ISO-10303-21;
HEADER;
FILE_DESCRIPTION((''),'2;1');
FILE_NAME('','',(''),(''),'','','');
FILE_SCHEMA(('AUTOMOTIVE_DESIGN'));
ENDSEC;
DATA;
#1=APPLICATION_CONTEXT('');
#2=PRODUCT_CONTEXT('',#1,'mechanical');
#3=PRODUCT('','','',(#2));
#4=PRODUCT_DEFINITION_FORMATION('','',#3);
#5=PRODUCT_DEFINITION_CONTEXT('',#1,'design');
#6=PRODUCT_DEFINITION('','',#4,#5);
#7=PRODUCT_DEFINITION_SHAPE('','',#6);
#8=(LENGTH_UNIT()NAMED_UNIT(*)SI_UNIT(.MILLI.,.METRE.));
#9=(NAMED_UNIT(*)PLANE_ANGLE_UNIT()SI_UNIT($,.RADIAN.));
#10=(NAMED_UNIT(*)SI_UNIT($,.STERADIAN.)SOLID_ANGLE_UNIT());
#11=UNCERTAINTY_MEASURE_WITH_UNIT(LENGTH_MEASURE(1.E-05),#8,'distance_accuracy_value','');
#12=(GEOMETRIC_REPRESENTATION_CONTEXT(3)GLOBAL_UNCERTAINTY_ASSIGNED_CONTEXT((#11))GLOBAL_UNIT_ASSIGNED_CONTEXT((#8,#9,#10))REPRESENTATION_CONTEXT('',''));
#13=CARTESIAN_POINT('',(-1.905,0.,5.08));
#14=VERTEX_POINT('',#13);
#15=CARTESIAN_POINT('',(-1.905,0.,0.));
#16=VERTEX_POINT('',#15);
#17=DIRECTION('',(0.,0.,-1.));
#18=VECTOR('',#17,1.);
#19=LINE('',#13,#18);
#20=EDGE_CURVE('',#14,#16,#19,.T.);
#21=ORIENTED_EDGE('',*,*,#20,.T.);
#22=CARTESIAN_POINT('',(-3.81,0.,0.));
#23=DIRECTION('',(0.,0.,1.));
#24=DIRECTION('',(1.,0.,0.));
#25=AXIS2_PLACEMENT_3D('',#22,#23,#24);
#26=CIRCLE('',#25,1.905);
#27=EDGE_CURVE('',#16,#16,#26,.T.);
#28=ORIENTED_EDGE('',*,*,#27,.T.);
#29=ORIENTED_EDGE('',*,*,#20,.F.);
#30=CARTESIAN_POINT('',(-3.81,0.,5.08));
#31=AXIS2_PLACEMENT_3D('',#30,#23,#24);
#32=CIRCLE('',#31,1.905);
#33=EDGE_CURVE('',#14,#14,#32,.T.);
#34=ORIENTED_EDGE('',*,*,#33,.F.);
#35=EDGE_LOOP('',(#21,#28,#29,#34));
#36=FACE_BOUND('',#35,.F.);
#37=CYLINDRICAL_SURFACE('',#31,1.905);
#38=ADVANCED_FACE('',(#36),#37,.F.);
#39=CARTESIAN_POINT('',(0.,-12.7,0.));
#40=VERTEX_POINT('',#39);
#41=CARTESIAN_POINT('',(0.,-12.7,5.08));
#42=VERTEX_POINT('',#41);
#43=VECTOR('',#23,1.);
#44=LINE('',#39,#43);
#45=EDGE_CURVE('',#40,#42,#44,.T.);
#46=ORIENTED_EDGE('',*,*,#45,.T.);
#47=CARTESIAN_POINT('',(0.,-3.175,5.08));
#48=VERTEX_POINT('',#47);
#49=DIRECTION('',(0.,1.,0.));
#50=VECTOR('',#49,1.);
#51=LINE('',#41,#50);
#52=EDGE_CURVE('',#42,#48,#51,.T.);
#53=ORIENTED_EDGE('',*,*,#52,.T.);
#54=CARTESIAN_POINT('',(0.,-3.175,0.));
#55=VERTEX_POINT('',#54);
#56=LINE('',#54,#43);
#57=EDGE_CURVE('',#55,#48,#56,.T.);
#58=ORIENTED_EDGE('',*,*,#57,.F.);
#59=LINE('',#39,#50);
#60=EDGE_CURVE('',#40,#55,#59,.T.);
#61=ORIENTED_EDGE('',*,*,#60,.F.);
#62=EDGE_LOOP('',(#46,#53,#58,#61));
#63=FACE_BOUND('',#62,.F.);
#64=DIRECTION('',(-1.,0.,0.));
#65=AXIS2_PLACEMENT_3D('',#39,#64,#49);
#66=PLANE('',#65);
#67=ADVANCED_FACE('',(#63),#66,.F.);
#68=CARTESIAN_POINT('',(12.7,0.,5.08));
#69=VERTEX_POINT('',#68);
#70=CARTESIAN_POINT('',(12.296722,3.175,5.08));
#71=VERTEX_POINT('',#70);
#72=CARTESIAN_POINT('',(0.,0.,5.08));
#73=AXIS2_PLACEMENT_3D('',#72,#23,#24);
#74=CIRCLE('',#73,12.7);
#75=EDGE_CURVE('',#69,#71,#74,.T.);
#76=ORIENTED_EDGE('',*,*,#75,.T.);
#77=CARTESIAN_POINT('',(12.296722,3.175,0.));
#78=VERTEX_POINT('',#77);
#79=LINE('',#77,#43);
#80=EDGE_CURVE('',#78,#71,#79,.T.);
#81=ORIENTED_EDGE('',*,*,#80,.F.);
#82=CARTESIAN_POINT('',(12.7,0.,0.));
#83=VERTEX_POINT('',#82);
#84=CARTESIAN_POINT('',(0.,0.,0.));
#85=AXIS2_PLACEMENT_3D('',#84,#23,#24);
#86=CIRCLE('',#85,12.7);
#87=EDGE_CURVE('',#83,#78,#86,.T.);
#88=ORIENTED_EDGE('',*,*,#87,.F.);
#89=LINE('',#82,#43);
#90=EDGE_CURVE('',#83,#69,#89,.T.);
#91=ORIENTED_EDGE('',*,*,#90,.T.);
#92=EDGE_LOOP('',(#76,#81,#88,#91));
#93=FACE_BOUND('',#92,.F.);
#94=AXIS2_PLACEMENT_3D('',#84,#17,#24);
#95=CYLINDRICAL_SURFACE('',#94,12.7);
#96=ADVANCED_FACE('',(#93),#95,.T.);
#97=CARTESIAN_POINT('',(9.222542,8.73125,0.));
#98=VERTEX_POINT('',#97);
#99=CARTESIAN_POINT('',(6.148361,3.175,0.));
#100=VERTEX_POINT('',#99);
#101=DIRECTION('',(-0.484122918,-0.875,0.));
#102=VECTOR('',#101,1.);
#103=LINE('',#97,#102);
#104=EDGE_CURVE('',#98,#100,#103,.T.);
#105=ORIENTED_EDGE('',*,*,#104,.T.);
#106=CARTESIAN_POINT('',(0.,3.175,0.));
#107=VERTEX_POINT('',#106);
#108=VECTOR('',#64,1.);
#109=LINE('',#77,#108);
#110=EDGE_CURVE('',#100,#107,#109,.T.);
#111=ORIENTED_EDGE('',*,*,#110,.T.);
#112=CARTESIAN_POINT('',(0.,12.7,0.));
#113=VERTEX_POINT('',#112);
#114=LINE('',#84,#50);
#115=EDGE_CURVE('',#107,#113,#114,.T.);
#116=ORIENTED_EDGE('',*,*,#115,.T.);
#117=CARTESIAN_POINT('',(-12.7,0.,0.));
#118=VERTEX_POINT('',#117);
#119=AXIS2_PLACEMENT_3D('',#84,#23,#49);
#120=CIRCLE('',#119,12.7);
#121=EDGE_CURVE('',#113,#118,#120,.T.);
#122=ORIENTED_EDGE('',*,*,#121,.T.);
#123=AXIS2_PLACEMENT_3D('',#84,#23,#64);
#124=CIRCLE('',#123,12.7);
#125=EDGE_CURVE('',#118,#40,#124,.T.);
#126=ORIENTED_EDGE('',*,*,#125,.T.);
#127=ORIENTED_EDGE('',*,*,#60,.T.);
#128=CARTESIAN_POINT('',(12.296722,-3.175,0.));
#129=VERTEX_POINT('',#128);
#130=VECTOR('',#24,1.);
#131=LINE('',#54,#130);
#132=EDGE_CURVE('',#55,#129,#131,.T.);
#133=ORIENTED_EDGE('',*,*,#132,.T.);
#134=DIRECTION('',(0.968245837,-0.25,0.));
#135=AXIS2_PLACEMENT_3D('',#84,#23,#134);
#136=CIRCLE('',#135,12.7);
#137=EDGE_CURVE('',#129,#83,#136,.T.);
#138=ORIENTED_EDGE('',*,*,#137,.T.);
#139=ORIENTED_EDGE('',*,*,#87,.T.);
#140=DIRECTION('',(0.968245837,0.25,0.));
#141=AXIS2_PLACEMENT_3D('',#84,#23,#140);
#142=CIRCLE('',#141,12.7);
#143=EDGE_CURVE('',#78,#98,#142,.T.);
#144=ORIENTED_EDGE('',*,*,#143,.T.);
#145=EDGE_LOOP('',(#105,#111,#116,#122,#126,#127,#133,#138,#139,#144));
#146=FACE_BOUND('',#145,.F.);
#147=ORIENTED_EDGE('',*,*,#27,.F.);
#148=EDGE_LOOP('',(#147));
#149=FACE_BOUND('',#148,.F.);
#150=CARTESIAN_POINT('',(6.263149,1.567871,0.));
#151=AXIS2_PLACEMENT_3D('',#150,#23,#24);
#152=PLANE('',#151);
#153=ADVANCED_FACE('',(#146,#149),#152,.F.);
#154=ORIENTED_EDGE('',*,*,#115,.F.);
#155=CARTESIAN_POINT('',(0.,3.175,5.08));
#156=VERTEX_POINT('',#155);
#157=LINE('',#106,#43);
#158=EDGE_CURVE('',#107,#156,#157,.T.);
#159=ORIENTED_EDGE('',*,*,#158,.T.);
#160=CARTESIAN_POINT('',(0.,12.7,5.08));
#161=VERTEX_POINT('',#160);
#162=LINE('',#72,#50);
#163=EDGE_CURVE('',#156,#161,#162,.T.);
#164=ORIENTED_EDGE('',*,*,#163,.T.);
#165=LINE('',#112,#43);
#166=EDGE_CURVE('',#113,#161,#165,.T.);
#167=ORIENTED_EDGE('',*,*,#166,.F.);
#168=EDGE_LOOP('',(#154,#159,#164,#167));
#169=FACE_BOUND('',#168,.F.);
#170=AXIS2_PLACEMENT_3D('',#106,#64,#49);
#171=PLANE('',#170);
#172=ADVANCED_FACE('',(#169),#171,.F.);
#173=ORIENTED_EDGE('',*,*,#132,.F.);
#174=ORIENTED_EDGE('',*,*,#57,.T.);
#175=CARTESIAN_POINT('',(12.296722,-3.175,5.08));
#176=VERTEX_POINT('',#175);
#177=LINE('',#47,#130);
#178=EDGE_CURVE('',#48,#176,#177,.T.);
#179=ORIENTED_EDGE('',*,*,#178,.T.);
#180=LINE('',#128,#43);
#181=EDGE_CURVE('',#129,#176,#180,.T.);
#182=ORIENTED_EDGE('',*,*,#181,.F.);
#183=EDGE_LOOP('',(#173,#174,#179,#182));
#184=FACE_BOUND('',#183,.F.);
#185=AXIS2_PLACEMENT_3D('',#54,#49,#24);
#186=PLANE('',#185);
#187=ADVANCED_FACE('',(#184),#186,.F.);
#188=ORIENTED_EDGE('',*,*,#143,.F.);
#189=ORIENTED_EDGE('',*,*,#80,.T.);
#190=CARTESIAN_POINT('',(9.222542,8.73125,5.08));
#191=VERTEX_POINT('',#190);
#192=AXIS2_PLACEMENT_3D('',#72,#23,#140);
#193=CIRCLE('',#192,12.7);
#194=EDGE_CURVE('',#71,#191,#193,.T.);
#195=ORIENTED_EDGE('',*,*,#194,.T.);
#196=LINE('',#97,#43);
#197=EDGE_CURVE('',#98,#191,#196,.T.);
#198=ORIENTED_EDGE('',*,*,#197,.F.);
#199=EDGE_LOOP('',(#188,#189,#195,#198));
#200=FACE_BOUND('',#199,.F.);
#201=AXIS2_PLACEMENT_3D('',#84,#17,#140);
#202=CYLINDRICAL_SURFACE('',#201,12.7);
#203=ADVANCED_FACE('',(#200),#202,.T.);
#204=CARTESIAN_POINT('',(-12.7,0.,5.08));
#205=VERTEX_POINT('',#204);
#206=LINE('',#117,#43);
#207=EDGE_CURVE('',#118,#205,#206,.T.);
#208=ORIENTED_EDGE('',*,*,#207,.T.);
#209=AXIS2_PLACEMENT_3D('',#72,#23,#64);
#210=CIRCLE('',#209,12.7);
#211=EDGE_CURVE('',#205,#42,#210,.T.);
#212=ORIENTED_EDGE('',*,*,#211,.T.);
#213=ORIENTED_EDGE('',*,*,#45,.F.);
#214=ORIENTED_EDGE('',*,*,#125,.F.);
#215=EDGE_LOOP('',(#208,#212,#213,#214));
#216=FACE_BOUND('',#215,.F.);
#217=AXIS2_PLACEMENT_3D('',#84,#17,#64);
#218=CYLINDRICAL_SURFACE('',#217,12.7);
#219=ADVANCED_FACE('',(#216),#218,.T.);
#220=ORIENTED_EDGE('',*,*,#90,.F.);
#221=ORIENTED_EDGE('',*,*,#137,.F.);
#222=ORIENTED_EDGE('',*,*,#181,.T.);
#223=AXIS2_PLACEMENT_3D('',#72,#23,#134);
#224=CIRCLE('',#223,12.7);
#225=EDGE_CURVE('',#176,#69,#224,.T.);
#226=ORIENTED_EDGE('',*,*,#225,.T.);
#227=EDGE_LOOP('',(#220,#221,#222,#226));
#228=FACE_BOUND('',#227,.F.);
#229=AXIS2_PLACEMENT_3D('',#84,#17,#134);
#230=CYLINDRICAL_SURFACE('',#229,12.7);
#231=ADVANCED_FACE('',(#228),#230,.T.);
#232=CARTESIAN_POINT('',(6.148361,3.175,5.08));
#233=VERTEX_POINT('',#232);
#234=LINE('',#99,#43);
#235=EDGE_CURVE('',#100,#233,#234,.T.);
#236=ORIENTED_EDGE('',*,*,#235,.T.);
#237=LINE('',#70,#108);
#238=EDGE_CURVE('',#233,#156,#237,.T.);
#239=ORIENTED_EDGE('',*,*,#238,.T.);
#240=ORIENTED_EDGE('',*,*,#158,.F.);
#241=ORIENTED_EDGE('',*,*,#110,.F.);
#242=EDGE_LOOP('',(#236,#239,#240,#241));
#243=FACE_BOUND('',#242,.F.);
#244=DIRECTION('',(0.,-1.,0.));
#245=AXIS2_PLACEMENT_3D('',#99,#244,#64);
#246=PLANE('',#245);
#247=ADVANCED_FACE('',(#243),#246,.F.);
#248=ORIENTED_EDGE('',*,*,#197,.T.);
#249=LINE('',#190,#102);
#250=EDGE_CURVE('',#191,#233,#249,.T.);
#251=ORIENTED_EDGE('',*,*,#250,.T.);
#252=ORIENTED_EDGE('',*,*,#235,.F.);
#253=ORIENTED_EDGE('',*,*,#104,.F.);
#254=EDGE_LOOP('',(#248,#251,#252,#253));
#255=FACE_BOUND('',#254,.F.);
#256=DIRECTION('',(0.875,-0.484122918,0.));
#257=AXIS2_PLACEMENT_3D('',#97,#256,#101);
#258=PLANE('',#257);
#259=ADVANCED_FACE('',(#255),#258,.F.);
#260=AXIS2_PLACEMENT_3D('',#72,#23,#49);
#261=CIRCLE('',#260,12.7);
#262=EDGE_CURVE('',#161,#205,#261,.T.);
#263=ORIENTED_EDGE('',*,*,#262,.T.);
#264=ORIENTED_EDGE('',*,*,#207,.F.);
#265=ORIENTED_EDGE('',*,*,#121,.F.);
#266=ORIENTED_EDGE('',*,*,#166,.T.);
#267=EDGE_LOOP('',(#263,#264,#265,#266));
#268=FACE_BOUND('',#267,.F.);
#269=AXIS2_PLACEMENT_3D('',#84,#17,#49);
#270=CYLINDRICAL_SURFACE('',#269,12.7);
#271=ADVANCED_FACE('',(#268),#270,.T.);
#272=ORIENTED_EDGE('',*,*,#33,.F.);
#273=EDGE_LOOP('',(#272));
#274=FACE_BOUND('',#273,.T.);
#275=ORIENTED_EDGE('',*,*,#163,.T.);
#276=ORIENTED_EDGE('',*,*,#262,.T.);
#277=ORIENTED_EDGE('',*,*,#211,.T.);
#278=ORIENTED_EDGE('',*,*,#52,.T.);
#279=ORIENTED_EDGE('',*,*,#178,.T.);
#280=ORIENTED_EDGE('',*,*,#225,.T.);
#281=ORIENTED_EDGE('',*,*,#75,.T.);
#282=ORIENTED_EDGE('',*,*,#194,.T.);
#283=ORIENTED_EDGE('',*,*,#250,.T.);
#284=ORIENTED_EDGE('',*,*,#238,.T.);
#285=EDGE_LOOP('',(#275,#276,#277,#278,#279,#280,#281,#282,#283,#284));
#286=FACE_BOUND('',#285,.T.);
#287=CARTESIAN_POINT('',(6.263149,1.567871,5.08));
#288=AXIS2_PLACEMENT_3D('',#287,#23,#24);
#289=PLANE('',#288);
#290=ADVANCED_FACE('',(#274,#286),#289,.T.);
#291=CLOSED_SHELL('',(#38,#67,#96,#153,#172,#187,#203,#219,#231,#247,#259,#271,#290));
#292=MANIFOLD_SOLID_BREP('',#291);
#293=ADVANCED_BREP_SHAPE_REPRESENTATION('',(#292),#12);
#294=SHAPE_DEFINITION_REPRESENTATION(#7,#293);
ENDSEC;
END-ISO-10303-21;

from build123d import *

# Parameters (mm, degrees)
F1_DEPTH = 5.08
F2_R     = 1.905
F3_DEPTH = 5.081


with BuildPart() as f1:
    # F0 (on Top) → F1 (new body)
    with BuildSketch(Plane.XY):
        with BuildLine():
            Line((0, 0), (12.7, 0))
            ThreePointArc((12.7, 0), (12.5987771426, 1.6002545145), (12.2967221242, 3.175))
            Line((12.2967221242, 3.175), (6.1483610621, 3.175))
            Line((6.1483610621, 3.175), (0, 3.175))
            Line((0, 3.175), (0, 0))
        make_face()
        with BuildLine():
            ThreePointArc((12.2967221242, -3.175), (12.5987771426, -1.6002545145), (12.7, 0))
            Line((12.7, 0), (0, 0))
            Line((0, 0), (0, -3.175))
            Line((0, -3.175), (6.1483610621, -3.175))
            Line((6.1483610621, -3.175), (12.2967221242, -3.175))
        make_face()
        with BuildLine():
            Line((6.1483610621, 3.175), (12.2967221242, 3.175))
            ThreePointArc((12.2967221242, 3.175), (11.1125, 6.1483610621), (9.2225415932, 8.73125))
            Line((9.2225415932, 8.73125), (6.1483610621, 3.175))
        make_face()
        with BuildLine():
            Line((-12.7, 0), (0, 0))
            Line((0, 0), (0, 3.175))
            Line((0, 3.175), (0, 6.35))
            Line((0, 6.35), (0, 12.7))
            ThreePointArc((0, 12.7), (-8.9802561211, 8.9802561211), (-12.7, 0))
        make_face()
        with BuildLine():
            Line((0, -3.175), (0, 0))
            Line((0, 0), (-12.7, 0))
            ThreePointArc((-12.7, 0), (-8.9802561211, -8.9802561211), (0, -12.7))
            Line((0, -12.7), (0, -6.35))
            Line((0, -6.35), (0, -3.175))
        make_face()
    extrude(amount=F1_DEPTH)

    # F2 (on face) → F3 (cut, through all)
    with BuildSketch(Plane.XY.offset(5.08)):
        with Locations((-3.81, 0)):
            Circle(F2_R)
    extrude(amount=-F3_DEPTH, mode=Mode.SUBTRACT)


solid = f1.part
